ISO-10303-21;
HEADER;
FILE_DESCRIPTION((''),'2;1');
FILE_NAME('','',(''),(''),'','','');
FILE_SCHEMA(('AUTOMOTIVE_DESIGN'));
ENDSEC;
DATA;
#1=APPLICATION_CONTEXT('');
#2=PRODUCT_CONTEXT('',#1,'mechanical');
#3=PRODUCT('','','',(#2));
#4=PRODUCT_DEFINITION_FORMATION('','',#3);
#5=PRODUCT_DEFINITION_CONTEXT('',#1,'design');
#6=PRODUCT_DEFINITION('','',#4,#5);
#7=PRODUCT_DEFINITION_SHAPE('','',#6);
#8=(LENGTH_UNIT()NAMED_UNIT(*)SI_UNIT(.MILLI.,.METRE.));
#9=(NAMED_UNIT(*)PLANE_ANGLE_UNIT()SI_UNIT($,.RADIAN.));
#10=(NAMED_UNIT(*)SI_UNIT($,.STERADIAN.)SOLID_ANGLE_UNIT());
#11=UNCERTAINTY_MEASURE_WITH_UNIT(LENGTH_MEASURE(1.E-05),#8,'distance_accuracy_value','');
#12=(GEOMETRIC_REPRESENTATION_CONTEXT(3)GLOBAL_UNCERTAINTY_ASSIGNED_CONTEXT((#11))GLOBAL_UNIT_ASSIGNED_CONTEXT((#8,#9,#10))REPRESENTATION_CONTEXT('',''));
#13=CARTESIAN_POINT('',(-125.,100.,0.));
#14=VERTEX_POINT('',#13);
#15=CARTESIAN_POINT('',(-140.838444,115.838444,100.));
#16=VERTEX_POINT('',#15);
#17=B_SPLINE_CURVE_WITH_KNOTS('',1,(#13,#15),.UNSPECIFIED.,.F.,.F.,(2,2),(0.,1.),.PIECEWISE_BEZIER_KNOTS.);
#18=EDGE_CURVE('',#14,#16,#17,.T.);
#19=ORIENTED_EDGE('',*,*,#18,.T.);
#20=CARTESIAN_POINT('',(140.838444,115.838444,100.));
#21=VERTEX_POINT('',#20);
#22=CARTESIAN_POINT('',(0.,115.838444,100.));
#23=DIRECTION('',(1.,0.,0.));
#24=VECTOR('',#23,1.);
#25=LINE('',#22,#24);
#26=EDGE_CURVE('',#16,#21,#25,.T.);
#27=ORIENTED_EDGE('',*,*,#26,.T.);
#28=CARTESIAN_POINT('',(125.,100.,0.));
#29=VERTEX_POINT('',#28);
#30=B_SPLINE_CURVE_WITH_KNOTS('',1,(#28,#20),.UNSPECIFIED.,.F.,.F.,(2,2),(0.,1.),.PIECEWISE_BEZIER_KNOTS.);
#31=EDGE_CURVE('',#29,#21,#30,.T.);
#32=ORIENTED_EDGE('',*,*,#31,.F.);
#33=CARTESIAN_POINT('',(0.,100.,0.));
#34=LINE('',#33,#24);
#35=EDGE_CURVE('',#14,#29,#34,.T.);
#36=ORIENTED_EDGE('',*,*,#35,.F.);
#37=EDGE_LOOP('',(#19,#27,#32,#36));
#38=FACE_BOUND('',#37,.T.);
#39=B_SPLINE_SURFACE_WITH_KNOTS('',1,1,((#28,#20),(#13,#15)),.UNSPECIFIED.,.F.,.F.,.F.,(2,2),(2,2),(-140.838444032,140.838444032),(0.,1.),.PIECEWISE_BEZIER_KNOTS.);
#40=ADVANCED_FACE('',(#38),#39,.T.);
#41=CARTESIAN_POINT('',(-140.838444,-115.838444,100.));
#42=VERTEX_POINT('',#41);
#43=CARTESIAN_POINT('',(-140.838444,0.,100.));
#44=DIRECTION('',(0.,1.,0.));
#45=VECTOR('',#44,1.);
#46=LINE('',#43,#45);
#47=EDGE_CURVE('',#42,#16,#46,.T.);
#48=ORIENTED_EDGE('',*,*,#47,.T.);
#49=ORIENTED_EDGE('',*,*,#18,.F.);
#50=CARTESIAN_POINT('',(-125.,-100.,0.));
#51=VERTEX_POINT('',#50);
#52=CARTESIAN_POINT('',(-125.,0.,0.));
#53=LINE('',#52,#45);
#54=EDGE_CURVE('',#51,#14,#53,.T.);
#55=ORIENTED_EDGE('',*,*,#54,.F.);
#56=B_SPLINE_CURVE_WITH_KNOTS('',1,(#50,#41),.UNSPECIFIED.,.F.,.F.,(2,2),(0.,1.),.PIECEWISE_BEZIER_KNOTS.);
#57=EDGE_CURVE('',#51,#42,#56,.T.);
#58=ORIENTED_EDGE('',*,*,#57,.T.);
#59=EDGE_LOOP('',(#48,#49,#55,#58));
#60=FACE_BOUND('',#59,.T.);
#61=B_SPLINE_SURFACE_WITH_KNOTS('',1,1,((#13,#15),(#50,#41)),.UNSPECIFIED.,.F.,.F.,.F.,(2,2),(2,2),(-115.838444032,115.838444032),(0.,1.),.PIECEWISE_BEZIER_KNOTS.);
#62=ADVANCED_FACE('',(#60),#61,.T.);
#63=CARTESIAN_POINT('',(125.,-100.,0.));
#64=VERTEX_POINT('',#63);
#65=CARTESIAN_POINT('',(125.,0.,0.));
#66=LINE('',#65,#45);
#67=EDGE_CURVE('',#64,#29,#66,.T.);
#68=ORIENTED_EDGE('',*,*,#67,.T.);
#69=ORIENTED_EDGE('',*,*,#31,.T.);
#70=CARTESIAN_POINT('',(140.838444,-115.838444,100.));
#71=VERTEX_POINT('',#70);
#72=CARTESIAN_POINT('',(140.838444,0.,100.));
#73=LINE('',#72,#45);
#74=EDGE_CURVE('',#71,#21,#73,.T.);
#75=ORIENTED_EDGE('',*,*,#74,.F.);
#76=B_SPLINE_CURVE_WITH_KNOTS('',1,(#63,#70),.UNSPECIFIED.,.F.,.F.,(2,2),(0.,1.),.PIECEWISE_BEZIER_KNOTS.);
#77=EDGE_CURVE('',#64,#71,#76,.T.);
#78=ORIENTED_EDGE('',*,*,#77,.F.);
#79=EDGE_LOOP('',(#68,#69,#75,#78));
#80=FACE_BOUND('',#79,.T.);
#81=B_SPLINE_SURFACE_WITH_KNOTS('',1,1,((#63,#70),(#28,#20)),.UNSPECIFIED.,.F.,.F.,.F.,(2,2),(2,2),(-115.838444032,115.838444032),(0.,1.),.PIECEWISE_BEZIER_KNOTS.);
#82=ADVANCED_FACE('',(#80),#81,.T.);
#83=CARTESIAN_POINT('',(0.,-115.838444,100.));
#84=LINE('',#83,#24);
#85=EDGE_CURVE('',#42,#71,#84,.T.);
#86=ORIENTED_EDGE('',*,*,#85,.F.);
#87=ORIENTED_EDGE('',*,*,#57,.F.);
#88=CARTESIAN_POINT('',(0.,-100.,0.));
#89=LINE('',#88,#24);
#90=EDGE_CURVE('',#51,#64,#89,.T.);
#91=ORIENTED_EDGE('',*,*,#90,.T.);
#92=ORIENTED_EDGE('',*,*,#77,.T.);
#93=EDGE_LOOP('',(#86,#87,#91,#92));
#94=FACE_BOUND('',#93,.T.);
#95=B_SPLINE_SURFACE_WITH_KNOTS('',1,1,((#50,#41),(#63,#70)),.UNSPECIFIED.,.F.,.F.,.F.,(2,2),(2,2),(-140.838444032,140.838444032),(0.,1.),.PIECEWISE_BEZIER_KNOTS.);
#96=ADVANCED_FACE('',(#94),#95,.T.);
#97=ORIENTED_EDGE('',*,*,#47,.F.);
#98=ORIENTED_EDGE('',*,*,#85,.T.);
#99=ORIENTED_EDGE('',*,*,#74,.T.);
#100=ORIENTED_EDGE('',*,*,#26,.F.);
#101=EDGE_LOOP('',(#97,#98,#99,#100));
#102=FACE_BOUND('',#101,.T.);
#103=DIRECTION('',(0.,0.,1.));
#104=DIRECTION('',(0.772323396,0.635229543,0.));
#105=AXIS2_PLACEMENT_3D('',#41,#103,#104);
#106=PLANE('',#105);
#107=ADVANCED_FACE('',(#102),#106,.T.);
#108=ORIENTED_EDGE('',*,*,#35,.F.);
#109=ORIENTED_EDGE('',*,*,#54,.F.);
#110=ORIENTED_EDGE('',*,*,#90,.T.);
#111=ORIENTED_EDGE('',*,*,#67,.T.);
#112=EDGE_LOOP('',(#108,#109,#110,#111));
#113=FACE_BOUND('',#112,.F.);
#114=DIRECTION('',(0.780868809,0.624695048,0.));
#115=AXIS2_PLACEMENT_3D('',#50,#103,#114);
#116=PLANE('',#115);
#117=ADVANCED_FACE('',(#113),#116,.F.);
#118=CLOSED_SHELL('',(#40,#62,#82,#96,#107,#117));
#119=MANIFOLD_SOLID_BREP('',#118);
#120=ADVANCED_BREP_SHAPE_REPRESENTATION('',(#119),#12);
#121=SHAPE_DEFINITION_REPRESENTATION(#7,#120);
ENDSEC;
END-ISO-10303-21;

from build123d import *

# Parameters (mm, degrees)
F0_W     = 250
F0_H     = 200
F1_DEPTH = 100
F1_TAPER = -9


# Not quite as in the source:
# - the program builds the solid bodies; features that only make, move or delete a surface that nothing else refers to are left out


with BuildPart() as f1:
    # F0 (on Top) → F1 (new body)
    with BuildSketch(Plane.XY):
        Rectangle(F0_W, F0_H)
    extrude(amount=F1_DEPTH, taper=F1_TAPER)


solid = f1.part
